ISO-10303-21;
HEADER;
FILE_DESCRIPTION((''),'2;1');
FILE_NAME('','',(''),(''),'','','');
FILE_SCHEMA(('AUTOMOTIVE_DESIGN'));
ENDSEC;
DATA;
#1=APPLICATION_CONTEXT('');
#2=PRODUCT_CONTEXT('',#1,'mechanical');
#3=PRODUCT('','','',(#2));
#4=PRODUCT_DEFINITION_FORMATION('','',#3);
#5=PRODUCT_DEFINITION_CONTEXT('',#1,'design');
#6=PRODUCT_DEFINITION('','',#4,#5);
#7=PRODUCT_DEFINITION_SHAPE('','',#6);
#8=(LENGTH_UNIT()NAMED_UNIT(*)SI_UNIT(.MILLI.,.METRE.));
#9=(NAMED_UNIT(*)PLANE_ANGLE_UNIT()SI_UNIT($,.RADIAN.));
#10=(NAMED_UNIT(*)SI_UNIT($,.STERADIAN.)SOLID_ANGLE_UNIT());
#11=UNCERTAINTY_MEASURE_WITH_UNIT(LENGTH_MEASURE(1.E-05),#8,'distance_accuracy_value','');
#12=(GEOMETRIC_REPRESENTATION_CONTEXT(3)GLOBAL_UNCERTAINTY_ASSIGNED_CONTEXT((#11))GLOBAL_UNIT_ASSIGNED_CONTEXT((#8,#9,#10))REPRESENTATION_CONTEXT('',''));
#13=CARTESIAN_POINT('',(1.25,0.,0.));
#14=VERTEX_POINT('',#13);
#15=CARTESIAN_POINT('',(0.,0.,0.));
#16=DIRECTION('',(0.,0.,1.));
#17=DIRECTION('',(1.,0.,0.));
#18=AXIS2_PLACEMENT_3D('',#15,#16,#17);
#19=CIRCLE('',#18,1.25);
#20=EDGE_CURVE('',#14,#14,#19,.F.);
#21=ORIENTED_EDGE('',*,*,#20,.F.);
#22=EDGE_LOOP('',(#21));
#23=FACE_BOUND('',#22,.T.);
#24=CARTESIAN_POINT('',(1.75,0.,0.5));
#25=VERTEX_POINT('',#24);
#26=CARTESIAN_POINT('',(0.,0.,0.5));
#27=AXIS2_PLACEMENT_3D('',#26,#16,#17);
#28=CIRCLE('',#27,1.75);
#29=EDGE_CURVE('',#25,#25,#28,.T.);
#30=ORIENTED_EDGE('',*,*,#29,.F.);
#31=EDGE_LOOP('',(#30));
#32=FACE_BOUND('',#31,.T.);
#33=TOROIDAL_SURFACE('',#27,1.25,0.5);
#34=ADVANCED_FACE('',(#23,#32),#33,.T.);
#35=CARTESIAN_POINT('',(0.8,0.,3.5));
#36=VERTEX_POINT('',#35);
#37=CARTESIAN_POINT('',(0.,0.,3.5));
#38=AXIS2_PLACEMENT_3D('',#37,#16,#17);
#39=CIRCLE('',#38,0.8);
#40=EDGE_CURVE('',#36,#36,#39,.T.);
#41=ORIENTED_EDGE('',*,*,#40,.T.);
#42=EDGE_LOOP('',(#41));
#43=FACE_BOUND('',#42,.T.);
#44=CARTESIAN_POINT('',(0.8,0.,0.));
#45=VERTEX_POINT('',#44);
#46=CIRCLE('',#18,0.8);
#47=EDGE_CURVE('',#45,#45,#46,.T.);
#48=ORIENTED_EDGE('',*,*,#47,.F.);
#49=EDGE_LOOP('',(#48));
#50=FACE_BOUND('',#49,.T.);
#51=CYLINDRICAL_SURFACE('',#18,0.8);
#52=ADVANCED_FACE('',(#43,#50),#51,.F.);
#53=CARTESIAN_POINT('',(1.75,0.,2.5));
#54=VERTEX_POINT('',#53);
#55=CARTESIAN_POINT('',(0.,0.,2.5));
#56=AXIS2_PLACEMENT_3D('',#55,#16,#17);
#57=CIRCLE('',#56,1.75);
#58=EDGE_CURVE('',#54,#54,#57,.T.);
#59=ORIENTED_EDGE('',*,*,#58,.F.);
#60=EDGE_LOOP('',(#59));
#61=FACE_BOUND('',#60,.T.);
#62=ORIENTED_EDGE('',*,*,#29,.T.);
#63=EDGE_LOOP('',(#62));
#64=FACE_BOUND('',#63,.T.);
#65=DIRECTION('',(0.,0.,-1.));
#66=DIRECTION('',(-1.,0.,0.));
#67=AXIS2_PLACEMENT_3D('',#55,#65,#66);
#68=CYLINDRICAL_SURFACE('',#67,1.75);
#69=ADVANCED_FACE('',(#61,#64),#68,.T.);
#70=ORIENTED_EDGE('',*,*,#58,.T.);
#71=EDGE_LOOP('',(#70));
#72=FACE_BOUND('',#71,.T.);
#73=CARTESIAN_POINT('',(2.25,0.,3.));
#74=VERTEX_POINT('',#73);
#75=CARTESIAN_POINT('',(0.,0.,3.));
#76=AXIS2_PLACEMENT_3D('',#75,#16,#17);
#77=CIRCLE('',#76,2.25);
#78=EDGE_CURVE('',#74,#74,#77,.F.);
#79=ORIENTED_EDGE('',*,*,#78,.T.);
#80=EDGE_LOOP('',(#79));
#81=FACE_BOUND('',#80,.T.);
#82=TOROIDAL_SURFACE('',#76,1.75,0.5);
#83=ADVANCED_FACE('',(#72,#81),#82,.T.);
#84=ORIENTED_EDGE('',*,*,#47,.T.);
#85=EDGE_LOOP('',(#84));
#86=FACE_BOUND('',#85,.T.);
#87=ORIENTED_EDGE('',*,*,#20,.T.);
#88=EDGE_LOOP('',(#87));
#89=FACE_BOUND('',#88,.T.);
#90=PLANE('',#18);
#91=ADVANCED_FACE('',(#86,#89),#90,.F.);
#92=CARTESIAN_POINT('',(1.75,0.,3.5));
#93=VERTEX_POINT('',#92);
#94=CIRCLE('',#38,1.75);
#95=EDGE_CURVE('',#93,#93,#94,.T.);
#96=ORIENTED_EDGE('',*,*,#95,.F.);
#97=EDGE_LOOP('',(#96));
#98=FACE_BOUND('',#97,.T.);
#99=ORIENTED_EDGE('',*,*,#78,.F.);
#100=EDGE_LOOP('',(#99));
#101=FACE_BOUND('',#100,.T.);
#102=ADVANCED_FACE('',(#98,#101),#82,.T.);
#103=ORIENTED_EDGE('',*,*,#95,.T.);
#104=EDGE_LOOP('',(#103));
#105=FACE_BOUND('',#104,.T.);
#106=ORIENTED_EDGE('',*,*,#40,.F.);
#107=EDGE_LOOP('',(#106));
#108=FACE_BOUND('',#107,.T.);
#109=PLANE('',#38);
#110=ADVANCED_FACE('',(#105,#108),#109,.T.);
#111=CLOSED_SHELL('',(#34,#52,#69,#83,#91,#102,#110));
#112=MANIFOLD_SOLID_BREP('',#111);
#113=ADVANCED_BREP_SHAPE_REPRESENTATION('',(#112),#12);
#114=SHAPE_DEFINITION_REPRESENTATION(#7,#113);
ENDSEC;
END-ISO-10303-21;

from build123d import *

# Parameters (mm, degrees)
SKETCH_1_R               = 1.75
EXTRUDE_1_DEPTH          = 2.5
SKETCH_2_R               = 2.25
EXTRUDE_2_DEPTH          = 1
CUT_EXTRUDE_1_DEPTH      = 5.730221982
CUT_EXTRUDE_1_DEPTH_BACK = 5.730221982
SKETCH_3_R               = 0.8
FILLET_2_R               = 0.5


with BuildPart() as part:
    # 草图1 → 凸台-拉伸1 (new body)
    with BuildSketch(Plane.XY):
        Circle(SKETCH_1_R)
    extrude(amount=EXTRUDE_1_DEPTH)

    # 草图2 → 凸台-拉伸2 (add)
    with BuildSketch(Plane.XY.offset(2.5)):
        Circle(SKETCH_2_R)
    extrude(amount=EXTRUDE_2_DEPTH)

    # 草图3 → 切除-拉伸1 (cut, two sides: drawn at the far end of the back side and taken through both)
    with BuildSketch(Plane.XY.offset(3.5).offset(-CUT_EXTRUDE_1_DEPTH_BACK)):
        Circle(SKETCH_3_R)
    extrude(amount=CUT_EXTRUDE_1_DEPTH + CUT_EXTRUDE_1_DEPTH_BACK, mode=Mode.SUBTRACT)

    # 圆角2
    fillet_2_edges = [part.edges().sort_by_distance(p)[0] for p in [
        (-1.75, 0, 0),
        (-2.25, 0, 2.5),
        (-2.25, 0, 3.5),
    ]]
    fillet(fillet_2_edges, radius=FILLET_2_R - 0.0001)  # a hair under: the kernel refuses the full size


solid = part.part
